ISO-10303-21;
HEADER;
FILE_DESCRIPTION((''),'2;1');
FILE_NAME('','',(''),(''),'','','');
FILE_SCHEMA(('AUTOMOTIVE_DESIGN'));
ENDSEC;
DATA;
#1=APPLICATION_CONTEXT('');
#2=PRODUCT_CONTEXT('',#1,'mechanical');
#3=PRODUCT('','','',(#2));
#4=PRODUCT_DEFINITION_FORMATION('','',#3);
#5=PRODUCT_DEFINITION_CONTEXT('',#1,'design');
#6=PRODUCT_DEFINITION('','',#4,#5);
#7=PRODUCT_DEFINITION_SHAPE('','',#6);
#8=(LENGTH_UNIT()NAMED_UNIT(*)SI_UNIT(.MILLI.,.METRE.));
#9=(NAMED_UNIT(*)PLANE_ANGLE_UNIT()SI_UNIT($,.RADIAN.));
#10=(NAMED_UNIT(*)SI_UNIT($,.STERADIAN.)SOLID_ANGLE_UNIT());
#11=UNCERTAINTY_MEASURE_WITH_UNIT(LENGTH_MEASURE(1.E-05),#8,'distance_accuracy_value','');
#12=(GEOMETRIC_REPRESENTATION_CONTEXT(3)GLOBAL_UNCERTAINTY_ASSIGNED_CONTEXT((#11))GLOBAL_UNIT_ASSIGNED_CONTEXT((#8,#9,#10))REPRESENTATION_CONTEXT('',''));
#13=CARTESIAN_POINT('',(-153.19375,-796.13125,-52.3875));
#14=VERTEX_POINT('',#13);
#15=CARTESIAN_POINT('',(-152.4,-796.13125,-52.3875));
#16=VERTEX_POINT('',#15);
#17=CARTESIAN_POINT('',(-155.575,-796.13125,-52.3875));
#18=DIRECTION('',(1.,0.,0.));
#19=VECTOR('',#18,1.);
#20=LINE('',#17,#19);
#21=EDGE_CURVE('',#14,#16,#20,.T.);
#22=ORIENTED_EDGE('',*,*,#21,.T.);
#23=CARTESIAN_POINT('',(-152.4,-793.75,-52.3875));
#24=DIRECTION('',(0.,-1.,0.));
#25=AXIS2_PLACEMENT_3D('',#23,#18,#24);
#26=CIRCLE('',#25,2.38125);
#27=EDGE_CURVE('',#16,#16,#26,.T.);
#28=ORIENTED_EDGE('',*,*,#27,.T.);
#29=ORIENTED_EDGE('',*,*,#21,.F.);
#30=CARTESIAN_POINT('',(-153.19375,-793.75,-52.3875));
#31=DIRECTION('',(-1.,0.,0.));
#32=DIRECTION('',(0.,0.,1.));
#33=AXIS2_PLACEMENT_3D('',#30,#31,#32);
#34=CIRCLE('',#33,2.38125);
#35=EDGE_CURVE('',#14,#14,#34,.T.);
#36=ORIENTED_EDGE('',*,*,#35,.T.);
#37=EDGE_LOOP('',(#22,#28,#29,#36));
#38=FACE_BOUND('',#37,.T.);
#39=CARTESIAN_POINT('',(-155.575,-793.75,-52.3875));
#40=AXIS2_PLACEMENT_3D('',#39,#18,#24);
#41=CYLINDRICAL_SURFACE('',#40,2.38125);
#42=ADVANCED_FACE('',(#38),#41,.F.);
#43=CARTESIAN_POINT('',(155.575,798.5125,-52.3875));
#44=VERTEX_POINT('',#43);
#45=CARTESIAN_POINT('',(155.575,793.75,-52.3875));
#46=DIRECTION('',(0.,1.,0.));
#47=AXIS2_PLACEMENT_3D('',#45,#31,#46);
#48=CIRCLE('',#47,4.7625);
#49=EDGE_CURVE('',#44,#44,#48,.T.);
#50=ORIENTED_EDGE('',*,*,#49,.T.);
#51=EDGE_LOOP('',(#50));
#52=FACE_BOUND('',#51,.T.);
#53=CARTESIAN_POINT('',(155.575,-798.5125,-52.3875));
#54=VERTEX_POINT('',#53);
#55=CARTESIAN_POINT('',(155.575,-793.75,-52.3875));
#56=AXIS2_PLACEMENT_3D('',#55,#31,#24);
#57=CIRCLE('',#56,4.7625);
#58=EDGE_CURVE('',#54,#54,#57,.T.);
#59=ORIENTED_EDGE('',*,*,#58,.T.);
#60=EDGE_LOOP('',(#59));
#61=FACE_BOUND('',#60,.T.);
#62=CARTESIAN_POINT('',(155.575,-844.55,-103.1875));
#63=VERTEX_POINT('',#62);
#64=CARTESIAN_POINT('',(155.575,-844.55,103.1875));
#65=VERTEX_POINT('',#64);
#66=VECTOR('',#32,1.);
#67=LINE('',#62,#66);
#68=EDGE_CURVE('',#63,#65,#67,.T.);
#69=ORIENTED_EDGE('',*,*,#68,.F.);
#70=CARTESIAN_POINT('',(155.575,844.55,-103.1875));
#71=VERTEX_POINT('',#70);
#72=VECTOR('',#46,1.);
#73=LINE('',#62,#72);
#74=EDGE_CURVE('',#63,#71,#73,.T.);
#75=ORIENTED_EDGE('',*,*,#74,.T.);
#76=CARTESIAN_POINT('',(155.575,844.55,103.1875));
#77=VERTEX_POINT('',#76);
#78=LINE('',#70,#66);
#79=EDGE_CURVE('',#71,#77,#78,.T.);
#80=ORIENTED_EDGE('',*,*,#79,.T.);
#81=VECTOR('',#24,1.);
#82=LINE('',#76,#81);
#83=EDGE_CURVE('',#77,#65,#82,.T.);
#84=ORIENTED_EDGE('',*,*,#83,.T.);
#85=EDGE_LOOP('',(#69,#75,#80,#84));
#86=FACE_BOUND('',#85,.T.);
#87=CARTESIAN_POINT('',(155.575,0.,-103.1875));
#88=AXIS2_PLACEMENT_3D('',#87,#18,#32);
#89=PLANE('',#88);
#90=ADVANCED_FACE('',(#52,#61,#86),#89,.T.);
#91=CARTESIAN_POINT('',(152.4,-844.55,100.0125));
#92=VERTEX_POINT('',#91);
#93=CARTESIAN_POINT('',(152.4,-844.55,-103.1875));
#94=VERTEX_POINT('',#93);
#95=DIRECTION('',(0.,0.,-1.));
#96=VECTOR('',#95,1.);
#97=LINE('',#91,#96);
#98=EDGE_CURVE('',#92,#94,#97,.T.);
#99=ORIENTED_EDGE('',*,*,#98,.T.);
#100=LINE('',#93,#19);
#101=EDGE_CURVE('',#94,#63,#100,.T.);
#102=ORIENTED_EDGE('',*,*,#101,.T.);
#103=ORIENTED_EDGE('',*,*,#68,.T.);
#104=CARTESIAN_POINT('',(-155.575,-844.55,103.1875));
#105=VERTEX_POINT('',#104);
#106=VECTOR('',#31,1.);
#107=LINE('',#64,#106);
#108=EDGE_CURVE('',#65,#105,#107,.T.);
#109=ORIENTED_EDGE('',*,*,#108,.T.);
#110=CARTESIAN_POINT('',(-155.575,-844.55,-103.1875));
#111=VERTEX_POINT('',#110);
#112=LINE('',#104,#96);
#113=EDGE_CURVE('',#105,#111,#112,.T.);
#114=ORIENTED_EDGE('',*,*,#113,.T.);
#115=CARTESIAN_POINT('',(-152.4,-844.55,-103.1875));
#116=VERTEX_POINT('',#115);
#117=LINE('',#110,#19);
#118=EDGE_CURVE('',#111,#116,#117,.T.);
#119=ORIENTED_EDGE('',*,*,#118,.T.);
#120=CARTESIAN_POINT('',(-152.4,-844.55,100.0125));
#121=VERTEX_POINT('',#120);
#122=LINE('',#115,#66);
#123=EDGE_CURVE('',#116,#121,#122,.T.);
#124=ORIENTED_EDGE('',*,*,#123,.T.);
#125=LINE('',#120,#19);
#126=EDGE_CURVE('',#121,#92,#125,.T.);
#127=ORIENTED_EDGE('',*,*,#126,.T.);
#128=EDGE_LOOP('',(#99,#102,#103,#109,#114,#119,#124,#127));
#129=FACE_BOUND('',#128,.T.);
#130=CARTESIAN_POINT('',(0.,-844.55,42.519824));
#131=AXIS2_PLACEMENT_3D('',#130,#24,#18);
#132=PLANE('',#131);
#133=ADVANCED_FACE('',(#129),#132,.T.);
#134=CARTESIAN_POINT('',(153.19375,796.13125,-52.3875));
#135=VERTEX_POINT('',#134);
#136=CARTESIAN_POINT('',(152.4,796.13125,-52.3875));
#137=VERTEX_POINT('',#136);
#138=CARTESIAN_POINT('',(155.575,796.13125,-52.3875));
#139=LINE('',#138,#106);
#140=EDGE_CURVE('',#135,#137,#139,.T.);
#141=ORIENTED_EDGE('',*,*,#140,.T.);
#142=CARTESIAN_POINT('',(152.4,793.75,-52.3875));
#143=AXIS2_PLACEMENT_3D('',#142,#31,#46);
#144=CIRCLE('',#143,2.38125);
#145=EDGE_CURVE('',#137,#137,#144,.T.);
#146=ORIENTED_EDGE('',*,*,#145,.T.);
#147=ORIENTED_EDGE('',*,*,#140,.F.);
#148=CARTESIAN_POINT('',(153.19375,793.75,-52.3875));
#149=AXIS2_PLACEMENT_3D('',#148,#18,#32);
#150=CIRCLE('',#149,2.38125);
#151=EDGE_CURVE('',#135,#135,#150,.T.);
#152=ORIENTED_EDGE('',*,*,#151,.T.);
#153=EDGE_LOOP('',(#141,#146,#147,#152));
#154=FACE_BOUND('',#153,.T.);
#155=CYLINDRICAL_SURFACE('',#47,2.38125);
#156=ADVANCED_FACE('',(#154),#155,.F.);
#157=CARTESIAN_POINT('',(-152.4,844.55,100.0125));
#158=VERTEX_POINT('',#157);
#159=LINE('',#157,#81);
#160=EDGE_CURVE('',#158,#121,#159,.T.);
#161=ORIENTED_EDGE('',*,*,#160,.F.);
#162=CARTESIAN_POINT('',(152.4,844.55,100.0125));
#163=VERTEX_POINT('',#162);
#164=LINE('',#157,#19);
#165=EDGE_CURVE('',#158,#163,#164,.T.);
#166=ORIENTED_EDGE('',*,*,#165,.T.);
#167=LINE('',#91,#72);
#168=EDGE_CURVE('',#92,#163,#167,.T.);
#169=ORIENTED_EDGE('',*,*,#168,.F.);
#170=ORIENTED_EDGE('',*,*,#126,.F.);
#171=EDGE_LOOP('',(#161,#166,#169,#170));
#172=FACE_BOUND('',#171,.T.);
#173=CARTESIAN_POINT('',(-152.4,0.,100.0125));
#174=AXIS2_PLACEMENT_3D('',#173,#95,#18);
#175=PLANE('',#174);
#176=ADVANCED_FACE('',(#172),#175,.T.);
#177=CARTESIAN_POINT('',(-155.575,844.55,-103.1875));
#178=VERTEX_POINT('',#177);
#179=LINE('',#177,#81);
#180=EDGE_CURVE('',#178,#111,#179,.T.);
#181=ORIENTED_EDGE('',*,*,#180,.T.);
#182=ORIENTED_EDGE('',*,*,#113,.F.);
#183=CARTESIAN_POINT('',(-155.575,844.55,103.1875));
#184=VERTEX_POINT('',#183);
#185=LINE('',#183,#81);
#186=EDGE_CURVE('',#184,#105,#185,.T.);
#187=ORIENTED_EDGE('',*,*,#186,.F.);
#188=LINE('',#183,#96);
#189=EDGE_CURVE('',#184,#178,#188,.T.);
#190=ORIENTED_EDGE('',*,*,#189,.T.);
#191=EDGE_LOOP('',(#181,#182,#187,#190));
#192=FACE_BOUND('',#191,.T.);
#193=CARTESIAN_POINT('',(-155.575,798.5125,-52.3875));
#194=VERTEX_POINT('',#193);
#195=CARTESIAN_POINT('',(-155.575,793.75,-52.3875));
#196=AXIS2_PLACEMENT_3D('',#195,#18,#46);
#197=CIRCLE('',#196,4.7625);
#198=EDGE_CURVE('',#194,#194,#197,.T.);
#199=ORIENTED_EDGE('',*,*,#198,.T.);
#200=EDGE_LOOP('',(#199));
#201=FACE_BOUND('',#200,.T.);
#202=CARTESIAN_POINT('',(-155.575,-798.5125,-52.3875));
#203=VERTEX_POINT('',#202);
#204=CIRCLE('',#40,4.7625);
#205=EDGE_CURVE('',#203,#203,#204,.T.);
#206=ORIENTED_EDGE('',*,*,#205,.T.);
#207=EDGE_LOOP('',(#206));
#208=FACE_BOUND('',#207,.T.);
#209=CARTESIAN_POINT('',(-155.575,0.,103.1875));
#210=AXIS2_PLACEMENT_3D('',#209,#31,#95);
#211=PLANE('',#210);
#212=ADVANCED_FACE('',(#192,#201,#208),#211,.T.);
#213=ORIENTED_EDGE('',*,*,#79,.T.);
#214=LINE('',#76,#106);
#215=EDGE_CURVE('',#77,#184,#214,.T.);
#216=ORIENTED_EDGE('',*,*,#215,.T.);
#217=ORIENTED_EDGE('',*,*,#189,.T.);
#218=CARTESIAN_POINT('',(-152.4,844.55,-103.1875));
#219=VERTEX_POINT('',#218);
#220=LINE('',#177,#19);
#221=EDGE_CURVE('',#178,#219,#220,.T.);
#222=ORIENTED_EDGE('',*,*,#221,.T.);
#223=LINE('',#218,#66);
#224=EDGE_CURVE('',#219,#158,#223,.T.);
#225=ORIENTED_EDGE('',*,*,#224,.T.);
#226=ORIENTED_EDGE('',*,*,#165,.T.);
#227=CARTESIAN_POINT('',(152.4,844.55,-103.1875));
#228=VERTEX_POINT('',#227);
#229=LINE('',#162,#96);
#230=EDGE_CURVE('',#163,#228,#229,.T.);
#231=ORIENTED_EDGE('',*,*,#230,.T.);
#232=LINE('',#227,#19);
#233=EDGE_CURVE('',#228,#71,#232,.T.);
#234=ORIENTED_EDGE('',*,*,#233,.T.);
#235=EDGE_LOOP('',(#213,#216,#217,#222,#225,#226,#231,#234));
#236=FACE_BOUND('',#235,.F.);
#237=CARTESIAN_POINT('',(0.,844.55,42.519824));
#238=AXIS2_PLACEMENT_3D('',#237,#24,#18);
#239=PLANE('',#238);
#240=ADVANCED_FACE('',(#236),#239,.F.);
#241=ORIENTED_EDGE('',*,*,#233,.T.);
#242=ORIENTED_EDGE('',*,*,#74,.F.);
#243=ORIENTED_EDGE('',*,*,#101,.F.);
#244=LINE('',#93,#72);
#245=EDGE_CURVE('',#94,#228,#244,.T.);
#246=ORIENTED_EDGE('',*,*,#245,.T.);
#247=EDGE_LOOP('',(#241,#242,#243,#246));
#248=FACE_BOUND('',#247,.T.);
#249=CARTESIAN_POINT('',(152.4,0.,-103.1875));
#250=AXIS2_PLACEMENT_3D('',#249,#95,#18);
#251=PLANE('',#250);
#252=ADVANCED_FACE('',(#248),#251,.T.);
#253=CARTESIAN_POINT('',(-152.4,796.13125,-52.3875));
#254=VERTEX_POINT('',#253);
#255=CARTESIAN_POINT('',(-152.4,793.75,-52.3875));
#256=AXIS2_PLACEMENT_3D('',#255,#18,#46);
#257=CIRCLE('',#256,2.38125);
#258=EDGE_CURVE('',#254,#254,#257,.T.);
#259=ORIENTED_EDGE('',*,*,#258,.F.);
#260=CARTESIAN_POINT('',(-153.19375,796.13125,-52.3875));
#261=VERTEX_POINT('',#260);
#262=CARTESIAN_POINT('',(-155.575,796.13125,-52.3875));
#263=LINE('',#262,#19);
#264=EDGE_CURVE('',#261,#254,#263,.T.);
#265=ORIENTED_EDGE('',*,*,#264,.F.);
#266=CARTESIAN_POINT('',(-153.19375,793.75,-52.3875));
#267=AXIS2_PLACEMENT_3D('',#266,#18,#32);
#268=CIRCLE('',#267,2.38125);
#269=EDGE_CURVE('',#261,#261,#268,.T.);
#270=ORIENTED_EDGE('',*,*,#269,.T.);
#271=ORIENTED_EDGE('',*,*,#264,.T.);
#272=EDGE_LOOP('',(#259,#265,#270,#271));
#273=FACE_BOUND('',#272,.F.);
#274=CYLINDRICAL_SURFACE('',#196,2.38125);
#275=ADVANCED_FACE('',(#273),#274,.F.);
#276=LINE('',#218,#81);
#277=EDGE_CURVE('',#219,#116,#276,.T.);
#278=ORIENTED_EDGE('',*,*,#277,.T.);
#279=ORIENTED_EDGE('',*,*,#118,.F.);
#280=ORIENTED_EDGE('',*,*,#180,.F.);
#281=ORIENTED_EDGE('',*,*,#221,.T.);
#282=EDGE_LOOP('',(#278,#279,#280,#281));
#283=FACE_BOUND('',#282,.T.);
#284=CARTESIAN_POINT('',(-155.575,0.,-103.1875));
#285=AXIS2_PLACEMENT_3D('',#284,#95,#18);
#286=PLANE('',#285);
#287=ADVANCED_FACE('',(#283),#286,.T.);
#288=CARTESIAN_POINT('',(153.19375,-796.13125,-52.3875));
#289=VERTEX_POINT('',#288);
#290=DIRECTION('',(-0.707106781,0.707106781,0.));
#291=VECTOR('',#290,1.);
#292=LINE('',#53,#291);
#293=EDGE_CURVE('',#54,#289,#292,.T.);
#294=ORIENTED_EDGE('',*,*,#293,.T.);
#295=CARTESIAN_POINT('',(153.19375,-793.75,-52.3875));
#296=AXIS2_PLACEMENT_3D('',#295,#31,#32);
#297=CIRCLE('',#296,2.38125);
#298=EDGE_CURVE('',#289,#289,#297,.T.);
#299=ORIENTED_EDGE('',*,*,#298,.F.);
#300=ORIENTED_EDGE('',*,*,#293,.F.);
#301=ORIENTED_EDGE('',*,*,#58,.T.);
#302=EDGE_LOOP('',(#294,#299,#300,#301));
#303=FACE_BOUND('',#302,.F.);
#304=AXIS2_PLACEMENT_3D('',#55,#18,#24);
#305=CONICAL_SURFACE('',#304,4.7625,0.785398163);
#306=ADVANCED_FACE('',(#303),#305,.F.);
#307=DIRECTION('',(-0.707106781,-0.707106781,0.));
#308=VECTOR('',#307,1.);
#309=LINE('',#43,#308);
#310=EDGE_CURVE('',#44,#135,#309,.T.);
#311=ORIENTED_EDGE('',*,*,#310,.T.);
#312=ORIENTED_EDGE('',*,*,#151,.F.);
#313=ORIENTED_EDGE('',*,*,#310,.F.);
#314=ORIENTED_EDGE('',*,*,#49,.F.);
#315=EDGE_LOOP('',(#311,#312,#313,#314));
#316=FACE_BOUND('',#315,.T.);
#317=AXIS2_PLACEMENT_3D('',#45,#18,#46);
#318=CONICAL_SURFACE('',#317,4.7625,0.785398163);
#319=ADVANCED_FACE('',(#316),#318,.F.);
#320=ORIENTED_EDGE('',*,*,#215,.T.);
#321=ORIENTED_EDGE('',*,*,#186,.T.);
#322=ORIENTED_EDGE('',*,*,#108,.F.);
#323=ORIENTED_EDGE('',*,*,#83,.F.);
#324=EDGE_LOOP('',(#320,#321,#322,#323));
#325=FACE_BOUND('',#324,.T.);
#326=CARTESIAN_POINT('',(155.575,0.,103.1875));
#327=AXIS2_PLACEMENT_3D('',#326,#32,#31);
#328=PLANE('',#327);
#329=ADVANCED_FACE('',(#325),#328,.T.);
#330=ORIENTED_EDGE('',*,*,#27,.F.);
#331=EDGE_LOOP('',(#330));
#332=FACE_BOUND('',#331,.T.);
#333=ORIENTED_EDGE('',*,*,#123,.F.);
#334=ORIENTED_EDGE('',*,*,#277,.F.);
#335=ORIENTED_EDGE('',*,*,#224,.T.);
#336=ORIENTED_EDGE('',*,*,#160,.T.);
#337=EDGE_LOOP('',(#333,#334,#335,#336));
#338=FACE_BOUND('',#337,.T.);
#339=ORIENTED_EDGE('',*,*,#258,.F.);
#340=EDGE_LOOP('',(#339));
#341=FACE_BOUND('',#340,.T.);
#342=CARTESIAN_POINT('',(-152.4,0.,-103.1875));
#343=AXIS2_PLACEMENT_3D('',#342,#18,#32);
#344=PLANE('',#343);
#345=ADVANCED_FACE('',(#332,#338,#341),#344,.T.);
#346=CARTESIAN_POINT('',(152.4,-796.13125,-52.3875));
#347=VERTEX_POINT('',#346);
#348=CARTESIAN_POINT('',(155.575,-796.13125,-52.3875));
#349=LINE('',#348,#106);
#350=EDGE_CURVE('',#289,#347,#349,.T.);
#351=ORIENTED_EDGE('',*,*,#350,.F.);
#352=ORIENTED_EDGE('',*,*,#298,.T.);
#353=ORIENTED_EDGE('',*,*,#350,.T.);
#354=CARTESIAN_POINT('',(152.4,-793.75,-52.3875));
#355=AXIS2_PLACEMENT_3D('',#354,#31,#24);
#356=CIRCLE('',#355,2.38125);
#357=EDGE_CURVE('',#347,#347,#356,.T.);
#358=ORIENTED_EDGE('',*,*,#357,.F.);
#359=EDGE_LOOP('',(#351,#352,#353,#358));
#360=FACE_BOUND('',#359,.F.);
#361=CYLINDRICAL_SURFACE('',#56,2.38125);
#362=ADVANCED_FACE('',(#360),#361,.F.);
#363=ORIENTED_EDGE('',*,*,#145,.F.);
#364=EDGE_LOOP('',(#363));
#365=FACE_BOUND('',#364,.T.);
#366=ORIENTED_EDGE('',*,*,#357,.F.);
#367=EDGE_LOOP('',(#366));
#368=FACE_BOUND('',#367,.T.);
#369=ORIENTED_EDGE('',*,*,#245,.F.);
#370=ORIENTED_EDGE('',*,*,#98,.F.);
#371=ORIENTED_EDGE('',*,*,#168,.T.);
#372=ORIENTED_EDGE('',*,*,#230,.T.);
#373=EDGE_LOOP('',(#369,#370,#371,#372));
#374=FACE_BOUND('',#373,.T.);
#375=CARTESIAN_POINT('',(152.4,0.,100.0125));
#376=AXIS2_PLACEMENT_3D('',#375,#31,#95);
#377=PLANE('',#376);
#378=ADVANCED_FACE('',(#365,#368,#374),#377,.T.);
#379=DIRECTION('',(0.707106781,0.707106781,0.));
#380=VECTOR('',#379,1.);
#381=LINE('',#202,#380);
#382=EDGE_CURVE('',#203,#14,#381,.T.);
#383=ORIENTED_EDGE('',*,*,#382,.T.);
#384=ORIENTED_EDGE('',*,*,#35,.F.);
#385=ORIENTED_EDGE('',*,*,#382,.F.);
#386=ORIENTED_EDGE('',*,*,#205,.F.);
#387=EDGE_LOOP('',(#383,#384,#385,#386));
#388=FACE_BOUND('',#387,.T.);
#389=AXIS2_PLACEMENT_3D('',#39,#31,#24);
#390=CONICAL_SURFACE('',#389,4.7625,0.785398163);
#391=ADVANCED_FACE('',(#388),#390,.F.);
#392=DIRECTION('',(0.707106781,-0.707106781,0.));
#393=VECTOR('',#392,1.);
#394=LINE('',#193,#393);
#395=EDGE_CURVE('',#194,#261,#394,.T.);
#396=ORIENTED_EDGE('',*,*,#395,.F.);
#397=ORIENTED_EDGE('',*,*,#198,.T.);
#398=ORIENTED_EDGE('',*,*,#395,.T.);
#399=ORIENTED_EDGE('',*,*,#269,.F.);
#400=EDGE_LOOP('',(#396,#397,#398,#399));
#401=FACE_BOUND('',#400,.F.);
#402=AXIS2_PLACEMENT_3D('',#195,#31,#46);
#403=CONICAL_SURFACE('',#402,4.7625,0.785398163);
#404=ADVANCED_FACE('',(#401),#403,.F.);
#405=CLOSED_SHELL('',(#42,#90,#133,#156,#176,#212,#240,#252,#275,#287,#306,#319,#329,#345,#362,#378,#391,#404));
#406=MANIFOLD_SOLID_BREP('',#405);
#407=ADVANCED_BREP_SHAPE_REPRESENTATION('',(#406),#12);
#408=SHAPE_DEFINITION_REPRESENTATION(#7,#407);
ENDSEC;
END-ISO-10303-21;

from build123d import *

# Parameters (mm, degrees)
F1_DEPTH         = 844.55
F3_D             = 4.7625
F3_DEPTH         = 25.4
F3_CSINK_D       = 9.525
F3_CSINK_ANGLE   = 90
F3_TIP           = 1.4307993491
F3_COPIES2_COUNT = 2


# Not quite as in the source:
# - a pattern or mirror of a feature is missing from the dataset's text; its kind, count and spacing are read off the source's solid


with BuildPart() as f1:
    # F0 (on Front) → F1 (new body, symmetric)
    with BuildSketch(Plane.XZ):
        Polygon((155.575, -103.1875), (155.575, 103.1875), (-155.575, 103.1875), (-155.575, -103.1875), (-152.4, -103.1875), (-152.4, 100.0125), (152.4, 100.0125), (152.4, -103.1875), align=None)
    extrude(amount=F1_DEPTH, both=True)

    # F3
    with Locations(Plane.YZ.offset(155.575)):
        with Locations((-793.75, -52.3875)):
            f3 = CounterSinkHole(F3_D / 2, F3_CSINK_D / 2, depth=F3_DEPTH, counter_sink_angle=F3_CSINK_ANGLE)
            with Locations((0, 0, -(F3_DEPTH + F3_TIP / 2))):  # 118° drill point
                Cone(0, F3_D / 2, F3_TIP, mode=Mode.SUBTRACT)

    # F3_copies: F3 across plane
    add(f3.mirror(Plane(origin=(0, 0, 0), x_dir=(0, 0, -1), z_dir=(-1, 0, 0))), mode=Mode.SUBTRACT)

    # F3_copies1: F3 across plane
    add(f3.mirror(Plane.ZX), mode=Mode.SUBTRACT)

    # F3_copies2: F3 ×2 about axis
    f3_copies2_axis = Axis((0, 0, 0), (0, 0, 1))
    for i in range(1, F3_COPIES2_COUNT):
        add(f3.rotate(f3_copies2_axis, i * 360 / F3_COPIES2_COUNT), mode=Mode.SUBTRACT)


solid = f1.part
